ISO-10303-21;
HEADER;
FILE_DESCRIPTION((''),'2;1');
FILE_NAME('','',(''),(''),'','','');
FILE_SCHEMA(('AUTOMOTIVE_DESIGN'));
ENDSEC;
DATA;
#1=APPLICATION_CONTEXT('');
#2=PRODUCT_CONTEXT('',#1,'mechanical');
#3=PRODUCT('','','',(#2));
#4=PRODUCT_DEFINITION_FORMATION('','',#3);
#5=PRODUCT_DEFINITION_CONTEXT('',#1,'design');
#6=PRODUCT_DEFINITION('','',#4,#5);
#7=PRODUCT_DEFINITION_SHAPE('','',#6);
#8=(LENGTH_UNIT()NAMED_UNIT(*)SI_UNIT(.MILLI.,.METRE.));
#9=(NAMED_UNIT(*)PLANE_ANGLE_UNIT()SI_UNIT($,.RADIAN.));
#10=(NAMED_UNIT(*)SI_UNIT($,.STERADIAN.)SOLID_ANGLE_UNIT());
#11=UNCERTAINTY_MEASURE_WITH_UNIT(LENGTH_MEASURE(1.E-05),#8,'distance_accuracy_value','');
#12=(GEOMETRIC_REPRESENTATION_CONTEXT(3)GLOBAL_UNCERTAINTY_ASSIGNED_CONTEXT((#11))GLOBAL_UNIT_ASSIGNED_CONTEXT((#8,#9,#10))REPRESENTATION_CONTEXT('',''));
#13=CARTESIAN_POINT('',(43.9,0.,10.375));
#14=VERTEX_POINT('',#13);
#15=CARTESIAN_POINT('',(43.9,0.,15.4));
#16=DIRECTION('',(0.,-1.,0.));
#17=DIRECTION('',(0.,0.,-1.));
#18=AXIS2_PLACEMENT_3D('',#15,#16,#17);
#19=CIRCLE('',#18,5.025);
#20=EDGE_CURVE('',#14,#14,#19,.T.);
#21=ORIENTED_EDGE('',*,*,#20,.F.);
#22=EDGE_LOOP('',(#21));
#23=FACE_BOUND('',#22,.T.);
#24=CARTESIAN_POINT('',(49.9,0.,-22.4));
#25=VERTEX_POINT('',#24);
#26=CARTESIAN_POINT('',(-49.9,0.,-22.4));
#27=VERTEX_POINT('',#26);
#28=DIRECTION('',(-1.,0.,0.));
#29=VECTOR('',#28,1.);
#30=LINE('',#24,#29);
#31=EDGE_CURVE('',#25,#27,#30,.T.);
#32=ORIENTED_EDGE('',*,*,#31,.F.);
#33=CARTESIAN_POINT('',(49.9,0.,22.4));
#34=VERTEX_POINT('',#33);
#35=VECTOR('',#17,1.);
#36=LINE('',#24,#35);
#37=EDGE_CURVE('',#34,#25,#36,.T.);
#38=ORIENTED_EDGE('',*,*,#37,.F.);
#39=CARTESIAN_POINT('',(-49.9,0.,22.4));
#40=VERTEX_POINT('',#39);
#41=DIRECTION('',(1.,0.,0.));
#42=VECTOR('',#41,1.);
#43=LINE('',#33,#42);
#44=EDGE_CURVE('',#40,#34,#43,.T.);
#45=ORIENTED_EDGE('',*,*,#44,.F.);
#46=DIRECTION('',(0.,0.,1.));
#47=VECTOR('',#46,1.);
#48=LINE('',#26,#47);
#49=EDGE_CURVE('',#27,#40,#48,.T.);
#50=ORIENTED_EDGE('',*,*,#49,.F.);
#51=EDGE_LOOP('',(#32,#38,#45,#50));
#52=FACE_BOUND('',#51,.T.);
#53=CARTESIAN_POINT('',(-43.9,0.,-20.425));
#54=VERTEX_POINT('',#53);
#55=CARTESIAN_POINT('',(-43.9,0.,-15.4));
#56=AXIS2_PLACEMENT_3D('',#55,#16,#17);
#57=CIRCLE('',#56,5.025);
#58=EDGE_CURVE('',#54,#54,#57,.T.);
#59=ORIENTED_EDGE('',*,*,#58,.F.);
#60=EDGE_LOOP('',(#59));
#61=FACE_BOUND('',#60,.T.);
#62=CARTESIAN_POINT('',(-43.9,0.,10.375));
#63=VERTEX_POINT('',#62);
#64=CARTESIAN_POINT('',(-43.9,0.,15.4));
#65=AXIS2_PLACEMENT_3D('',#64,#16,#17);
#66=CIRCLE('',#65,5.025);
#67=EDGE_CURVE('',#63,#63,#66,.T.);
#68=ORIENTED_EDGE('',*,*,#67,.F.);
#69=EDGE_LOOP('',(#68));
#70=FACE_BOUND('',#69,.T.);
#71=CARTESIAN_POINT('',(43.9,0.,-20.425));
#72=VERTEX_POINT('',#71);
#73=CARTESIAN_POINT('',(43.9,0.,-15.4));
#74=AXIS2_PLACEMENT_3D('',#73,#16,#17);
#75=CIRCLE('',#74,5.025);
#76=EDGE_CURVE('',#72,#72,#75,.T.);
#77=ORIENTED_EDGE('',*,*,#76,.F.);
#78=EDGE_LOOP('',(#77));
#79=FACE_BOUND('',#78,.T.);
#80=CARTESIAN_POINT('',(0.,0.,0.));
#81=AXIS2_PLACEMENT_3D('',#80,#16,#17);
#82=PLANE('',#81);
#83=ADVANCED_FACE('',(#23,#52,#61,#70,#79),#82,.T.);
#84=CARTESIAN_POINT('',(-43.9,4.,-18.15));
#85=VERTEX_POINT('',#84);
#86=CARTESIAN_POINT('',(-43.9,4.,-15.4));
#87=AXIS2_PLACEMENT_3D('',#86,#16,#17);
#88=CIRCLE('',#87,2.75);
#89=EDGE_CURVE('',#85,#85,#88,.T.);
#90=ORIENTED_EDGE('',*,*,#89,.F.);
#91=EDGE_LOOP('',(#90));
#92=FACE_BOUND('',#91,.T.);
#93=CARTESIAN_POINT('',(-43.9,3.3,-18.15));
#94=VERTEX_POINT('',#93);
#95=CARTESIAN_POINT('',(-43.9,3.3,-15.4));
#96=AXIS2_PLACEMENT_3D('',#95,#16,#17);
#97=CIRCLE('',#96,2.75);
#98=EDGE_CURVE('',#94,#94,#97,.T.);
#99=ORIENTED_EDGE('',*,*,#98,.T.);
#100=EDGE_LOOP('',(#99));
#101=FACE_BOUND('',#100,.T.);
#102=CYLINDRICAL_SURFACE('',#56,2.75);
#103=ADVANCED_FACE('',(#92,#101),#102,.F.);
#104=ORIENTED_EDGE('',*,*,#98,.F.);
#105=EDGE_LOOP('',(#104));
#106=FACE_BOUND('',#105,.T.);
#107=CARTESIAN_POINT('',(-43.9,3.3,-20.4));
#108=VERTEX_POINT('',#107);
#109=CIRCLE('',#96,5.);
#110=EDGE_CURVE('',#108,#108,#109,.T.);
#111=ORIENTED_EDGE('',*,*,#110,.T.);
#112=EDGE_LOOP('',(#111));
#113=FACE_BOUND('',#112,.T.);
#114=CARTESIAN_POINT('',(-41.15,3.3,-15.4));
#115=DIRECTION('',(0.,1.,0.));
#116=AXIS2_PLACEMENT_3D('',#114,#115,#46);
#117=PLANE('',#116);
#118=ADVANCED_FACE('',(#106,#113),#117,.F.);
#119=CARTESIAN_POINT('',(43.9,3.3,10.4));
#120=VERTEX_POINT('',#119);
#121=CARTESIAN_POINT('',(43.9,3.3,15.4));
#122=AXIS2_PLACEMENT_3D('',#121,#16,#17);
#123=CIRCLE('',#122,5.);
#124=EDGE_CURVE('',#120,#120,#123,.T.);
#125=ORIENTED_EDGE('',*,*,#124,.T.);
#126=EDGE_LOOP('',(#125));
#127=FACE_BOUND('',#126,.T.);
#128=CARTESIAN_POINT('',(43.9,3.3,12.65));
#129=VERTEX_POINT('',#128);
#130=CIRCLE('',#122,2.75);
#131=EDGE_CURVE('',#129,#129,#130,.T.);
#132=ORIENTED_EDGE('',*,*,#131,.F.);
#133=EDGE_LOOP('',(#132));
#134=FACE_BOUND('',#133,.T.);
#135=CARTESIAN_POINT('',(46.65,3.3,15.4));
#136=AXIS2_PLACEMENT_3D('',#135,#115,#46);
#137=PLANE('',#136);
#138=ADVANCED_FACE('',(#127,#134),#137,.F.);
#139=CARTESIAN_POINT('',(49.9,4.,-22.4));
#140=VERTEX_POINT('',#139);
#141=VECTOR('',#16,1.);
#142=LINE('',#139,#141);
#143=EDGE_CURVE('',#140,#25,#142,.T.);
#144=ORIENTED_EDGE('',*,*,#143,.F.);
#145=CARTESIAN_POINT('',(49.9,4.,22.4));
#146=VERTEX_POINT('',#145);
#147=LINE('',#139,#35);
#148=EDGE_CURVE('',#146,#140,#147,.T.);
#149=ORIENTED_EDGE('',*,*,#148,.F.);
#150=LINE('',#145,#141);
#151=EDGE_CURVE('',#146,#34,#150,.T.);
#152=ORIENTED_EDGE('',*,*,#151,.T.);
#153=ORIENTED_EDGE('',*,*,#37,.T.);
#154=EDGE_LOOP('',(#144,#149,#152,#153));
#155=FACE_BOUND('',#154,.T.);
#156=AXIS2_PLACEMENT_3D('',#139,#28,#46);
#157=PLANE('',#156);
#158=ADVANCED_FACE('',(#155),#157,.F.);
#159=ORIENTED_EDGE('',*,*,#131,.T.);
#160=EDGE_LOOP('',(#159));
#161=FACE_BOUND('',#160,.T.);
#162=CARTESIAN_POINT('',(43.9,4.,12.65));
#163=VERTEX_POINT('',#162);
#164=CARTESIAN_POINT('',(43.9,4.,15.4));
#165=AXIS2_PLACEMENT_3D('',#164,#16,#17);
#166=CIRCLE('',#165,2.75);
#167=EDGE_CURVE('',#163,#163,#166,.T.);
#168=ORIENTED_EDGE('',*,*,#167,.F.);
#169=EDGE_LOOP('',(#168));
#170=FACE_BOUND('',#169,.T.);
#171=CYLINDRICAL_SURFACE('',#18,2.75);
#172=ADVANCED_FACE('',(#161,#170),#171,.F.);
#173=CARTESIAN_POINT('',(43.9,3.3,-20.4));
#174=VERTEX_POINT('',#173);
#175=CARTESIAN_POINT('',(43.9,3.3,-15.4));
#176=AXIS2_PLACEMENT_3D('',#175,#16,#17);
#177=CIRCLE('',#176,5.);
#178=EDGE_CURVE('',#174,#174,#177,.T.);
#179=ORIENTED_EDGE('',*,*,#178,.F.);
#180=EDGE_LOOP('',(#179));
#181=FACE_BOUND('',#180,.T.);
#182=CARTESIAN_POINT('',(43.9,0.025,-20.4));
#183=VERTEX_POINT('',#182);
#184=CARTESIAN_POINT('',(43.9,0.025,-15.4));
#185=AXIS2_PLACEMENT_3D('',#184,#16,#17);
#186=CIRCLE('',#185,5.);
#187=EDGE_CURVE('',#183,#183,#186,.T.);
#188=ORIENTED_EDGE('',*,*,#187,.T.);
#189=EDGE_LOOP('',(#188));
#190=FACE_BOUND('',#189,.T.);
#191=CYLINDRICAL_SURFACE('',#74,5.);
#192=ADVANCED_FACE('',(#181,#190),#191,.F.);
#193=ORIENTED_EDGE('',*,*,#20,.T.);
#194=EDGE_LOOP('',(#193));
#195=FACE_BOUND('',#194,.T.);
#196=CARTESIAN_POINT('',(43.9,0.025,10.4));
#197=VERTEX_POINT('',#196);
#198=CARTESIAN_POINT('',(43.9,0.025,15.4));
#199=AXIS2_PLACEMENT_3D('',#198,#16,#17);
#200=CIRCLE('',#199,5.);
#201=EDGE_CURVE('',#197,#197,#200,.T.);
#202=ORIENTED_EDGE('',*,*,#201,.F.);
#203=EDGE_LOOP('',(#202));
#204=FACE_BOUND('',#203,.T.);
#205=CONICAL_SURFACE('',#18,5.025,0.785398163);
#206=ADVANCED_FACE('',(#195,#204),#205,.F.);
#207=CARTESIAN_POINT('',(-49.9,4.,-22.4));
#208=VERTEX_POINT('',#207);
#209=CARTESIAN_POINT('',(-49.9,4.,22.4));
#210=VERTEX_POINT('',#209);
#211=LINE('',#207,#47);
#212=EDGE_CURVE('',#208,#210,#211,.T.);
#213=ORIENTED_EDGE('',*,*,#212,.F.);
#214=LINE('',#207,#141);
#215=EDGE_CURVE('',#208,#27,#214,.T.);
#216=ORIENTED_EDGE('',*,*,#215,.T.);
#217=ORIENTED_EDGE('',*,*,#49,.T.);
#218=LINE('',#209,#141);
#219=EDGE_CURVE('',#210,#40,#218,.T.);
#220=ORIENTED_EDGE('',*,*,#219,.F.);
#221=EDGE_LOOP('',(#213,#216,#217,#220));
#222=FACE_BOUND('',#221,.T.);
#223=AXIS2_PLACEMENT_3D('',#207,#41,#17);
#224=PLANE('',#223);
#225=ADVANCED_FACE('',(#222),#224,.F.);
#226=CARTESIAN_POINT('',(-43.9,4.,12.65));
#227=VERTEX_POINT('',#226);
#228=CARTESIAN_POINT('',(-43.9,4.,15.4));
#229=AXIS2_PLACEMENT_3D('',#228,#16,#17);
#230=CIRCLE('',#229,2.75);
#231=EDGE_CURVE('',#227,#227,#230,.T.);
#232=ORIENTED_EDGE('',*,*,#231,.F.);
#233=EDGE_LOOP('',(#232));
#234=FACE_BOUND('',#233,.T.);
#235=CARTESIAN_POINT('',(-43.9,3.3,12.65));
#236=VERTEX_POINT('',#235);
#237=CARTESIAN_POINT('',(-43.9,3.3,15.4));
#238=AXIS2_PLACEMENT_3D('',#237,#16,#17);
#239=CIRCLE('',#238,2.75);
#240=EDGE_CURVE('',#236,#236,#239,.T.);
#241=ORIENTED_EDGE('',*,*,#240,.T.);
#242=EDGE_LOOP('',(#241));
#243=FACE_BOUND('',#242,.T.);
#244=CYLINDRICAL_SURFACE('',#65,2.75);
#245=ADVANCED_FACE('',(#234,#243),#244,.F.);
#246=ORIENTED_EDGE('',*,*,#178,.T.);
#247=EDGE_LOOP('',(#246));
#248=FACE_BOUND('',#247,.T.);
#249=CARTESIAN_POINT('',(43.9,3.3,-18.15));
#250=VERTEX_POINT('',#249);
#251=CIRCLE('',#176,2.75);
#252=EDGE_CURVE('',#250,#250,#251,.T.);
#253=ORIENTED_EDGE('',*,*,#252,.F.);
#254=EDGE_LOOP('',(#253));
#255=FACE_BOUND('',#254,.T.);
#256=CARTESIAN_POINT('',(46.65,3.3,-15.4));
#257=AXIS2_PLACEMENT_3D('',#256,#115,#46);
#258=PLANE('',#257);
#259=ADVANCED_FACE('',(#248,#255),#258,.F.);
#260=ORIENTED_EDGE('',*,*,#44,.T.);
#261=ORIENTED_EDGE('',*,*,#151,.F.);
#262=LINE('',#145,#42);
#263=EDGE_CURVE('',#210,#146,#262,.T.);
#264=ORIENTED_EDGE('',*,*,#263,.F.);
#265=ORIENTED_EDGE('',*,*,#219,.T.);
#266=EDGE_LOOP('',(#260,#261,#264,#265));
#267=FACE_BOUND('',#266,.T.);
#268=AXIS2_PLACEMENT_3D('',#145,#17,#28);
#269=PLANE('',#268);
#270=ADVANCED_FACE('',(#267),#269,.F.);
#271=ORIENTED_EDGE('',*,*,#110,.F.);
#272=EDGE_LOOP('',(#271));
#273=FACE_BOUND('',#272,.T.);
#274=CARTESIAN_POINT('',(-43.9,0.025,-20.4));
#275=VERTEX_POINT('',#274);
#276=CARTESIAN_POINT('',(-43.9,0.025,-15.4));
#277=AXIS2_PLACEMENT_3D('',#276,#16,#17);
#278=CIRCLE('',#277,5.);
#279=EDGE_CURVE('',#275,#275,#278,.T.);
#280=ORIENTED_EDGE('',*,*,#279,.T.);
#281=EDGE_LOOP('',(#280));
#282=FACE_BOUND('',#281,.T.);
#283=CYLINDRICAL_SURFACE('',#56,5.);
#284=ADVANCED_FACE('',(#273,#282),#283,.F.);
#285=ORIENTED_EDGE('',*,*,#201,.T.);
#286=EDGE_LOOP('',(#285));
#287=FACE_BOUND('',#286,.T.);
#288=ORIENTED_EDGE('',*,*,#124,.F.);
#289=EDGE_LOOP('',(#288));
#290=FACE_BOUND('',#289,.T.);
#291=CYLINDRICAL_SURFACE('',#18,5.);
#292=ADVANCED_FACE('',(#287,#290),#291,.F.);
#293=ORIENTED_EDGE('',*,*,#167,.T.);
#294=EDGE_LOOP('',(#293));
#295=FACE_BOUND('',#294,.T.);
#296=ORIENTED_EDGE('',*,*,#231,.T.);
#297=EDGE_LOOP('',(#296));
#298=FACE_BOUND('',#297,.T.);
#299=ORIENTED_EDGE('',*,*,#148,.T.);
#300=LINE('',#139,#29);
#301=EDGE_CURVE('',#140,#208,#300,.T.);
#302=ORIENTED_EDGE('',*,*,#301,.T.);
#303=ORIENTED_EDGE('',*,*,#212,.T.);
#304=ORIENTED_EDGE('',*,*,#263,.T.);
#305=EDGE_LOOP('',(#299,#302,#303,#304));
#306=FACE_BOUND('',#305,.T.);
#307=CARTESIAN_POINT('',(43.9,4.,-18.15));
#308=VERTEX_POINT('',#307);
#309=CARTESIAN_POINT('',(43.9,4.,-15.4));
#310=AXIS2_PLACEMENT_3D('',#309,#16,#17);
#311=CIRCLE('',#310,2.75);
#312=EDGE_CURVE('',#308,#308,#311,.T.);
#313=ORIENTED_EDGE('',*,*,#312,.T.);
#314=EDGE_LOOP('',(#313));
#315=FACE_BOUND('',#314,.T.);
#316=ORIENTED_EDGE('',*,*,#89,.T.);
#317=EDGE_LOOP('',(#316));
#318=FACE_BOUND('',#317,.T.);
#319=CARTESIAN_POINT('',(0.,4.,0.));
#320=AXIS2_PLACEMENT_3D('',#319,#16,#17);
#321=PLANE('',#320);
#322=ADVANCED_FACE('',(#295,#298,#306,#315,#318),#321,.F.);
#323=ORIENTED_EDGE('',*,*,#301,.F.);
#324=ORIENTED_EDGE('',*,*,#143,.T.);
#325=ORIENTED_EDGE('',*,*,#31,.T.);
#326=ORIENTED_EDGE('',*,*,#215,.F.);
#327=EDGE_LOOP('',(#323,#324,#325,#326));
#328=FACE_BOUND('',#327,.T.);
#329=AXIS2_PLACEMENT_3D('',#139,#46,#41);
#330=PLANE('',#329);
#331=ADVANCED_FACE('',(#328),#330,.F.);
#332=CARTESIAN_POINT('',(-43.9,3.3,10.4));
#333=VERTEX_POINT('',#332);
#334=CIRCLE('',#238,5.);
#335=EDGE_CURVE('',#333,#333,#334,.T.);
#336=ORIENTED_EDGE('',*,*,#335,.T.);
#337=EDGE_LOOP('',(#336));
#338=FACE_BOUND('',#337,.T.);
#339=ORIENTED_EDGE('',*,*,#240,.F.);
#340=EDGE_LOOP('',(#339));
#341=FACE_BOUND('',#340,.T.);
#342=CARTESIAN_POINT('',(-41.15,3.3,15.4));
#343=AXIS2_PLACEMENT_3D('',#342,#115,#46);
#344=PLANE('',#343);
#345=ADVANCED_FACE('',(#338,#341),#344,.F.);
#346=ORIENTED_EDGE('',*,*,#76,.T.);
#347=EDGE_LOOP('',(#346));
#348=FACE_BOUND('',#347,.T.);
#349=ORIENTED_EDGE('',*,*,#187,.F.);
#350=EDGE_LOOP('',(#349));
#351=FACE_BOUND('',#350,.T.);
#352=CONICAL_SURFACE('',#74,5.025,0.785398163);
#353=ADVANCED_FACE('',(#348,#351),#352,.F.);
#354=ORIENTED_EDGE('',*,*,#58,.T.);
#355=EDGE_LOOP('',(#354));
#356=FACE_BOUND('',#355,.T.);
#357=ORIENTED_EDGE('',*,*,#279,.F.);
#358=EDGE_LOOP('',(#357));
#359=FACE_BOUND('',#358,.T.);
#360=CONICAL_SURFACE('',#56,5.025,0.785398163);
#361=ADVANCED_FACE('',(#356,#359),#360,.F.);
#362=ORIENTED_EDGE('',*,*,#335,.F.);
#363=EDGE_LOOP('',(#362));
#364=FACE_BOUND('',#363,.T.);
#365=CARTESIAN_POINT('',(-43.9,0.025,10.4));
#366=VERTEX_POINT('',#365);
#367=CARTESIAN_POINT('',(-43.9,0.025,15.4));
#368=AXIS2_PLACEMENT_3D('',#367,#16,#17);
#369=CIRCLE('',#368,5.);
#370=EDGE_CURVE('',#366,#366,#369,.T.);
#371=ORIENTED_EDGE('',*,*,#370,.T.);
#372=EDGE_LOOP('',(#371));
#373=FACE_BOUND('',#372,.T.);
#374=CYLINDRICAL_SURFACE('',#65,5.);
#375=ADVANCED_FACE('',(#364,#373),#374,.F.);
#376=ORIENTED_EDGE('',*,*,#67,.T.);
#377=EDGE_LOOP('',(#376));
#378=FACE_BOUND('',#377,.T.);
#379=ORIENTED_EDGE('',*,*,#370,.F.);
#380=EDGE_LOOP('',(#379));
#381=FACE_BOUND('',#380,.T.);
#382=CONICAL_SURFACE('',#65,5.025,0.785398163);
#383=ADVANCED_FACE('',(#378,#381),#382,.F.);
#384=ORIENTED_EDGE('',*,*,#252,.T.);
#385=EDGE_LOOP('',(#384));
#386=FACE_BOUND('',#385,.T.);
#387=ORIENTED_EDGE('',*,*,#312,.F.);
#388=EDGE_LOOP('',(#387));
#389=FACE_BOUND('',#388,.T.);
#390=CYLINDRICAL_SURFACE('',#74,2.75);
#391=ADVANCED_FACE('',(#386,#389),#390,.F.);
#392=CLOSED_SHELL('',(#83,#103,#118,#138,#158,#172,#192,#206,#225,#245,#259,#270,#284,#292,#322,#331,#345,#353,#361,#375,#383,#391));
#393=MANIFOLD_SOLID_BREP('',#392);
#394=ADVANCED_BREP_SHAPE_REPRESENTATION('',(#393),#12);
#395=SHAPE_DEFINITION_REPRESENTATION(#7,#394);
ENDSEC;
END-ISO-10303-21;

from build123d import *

# Parameters (mm, degrees)
SKETCH_1_W      = 99.8
SKETCH_1_H      = 44.8
EXTRUDE_1_DEPTH = 4


# Read off the part's stored shape, not the designer's step: M5 扁圆形螺钉的柱孔
with BuildPart() as part:
    # 草图1 → 凸台-拉伸1 (new body)
    with BuildSketch(Plane(origin=(0, 0, 0), x_dir=(1, 0, 0), z_dir=(0, 1, 0))):
        Rectangle(SKETCH_1_W, SKETCH_1_H)
    extrude(amount=EXTRUDE_1_DEPTH)

    # M5 扁圆形螺钉的柱孔 outline → M5 扁圆形螺钉的柱孔 (revolve, cut)
    with BuildSketch(Plane(origin=(43.9, 0, -15.4), x_dir=(1, 0, 0), z_dir=(0, 0, 1))):
        Polygon((2.75, 3.3), (2.75, 4), (0, 4), (0, 0), (5.025, 0), (5, 0.025), (5, 3.3), align=None)
    revolve(axis=Axis((43.9, 0, -15.4), (0, 1, 0)), mode=Mode.SUBTRACT)

    # Hole Wizard M5 2 outline → Hole Wizard M5 2 (revolve, cut)
    with BuildSketch(Plane(origin=(43.9, 0, 15.4), x_dir=(1, 0, 0), z_dir=(0, 0, 1))):
        Polygon((0, 0), (5.025, 0), (5, 0.025), (5, 3.3), (2.75, 3.3), (2.75, 4), (0, 4), align=None)
    revolve(axis=Axis((43.9, 0, 15.4), (0, 1, 0)), mode=Mode.SUBTRACT)

    # Hole Wizard M5 3 outline → Hole Wizard M5 3 (revolve, cut)
    with BuildSketch(Plane(origin=(-43.9, 0, 15.4), x_dir=(1, 0, 0), z_dir=(0, 0, 1))):
        Polygon((0, 0), (5.025, 0), (5, 0.025), (5, 3.3), (2.75, 3.3), (2.75, 4), (0, 4), align=None)
    revolve(axis=Axis((-43.9, 0, 15.4), (0, 1, 0)), mode=Mode.SUBTRACT)

    # Hole Wizard M5 4 outline → Hole Wizard M5 4 (revolve, cut)
    with BuildSketch(Plane(origin=(-43.9, 0, -15.4), x_dir=(1, 0, 0), z_dir=(0, 0, 1))):
        Polygon((0, 0), (5.025, 0), (5, 0.025), (5, 3.3), (2.75, 3.3), (2.75, 4), (0, 4), align=None)
    revolve(axis=Axis((-43.9, 0, -15.4), (0, 1, 0)), mode=Mode.SUBTRACT)


solid = part.part
